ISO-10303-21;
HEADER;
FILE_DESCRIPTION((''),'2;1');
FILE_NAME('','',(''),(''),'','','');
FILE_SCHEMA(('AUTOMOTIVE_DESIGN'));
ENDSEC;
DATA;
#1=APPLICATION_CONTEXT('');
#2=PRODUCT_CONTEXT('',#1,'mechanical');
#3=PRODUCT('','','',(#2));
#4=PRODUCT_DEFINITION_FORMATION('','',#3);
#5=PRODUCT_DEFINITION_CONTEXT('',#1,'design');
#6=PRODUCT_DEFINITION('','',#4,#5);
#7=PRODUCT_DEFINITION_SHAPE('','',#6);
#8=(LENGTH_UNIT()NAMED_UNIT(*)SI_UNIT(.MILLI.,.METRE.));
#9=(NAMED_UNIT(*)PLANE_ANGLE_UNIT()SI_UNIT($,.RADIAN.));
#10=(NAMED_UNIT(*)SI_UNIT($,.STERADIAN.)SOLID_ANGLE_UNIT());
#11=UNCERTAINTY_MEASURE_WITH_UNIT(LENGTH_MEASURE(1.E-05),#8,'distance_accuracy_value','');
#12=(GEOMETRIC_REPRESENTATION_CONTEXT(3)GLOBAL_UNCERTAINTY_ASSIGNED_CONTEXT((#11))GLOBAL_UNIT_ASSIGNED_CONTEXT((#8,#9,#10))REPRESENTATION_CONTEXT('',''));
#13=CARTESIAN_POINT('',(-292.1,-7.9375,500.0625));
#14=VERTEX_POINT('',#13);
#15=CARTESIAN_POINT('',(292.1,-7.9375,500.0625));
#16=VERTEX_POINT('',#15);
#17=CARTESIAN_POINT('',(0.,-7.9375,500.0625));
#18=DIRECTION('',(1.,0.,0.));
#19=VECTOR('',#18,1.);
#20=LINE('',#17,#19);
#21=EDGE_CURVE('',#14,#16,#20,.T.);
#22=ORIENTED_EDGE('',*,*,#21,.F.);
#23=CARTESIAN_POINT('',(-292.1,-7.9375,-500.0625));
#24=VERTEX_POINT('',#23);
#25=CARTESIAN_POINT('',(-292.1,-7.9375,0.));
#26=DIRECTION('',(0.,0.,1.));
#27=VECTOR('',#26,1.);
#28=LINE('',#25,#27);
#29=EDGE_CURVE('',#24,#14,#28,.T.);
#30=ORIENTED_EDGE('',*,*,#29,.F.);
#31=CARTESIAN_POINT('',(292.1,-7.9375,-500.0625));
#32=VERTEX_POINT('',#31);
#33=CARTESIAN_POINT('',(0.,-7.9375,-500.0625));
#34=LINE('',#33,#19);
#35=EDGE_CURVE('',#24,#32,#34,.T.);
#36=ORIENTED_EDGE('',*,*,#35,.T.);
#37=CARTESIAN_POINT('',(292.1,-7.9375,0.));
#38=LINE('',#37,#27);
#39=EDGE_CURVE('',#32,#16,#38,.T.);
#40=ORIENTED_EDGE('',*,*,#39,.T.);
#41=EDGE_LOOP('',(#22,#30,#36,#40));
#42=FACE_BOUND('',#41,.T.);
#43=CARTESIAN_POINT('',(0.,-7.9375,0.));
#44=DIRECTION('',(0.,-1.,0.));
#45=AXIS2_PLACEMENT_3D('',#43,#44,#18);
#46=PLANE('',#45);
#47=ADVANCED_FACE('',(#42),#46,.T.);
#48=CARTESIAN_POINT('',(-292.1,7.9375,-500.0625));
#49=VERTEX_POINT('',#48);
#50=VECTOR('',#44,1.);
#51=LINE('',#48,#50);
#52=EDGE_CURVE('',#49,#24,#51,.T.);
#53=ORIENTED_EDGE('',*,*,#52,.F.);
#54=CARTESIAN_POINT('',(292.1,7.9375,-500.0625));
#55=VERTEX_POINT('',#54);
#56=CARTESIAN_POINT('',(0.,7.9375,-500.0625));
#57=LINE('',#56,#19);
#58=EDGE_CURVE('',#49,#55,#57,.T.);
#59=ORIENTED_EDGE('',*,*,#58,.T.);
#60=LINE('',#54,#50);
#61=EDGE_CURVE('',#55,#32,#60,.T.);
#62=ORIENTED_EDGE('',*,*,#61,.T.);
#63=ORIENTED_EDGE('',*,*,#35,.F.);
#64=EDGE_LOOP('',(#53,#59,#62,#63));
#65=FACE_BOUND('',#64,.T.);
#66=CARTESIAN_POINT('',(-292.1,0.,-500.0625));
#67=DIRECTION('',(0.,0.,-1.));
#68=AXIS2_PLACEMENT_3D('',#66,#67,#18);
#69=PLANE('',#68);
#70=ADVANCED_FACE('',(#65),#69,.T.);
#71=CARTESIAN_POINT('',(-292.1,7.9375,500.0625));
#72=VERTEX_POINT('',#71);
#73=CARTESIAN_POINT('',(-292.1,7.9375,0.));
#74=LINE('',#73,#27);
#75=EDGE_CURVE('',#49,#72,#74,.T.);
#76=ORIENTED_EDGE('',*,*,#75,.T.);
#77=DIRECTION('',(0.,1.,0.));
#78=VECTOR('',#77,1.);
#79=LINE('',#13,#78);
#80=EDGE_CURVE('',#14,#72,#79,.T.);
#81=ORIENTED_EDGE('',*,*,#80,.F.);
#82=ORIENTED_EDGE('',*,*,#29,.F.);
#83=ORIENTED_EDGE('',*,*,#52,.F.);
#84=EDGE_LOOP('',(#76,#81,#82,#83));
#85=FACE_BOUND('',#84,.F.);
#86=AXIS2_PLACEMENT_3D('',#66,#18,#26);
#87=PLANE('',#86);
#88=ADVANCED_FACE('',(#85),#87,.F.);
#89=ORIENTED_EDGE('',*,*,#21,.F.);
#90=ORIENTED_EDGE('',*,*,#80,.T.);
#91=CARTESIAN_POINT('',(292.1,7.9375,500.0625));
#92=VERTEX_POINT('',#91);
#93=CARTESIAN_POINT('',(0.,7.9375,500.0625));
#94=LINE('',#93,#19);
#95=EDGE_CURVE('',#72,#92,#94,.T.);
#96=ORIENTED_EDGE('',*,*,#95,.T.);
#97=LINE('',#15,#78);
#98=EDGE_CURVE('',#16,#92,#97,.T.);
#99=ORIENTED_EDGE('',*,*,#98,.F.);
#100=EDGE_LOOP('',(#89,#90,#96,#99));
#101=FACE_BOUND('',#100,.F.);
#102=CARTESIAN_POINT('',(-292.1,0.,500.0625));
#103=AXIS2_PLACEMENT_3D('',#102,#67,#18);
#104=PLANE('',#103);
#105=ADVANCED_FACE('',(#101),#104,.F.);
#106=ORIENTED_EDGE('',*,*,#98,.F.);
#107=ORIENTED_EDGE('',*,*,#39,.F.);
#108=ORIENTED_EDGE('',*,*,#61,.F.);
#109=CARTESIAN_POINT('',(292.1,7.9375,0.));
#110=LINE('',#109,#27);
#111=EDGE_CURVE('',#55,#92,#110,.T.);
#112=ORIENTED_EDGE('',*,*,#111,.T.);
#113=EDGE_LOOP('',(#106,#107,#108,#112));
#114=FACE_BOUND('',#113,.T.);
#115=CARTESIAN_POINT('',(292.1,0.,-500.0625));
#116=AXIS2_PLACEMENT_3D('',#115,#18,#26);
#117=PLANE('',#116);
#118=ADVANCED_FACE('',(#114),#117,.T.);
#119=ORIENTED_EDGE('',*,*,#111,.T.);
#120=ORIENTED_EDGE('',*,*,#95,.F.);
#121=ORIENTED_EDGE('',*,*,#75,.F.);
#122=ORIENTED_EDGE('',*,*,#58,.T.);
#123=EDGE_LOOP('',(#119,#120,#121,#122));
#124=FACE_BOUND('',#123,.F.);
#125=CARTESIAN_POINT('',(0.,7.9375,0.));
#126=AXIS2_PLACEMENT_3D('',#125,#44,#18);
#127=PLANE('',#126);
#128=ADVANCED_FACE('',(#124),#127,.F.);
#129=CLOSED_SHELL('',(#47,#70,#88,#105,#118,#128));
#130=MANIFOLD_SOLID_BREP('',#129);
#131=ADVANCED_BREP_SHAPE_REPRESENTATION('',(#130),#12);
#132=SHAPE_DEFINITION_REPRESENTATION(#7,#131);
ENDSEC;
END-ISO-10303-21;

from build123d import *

# Parameters (mm, degrees)
F0_W     = 584.2
F0_H     = 1000.125
F1_DEPTH = 7.9375


# Not quite as in the source:
# - a length typed as a fraction of an inch, garbled in the dataset ("3 / 203.2 mm" for 3/8 in), is restored


with BuildPart() as f1:
    # F0 (on Front) → F1 (new body, symmetric)
    with BuildSketch(Plane.XZ):
        Rectangle(F0_W, F0_H)
    extrude(amount=F1_DEPTH, both=True)


solid = f1.part
